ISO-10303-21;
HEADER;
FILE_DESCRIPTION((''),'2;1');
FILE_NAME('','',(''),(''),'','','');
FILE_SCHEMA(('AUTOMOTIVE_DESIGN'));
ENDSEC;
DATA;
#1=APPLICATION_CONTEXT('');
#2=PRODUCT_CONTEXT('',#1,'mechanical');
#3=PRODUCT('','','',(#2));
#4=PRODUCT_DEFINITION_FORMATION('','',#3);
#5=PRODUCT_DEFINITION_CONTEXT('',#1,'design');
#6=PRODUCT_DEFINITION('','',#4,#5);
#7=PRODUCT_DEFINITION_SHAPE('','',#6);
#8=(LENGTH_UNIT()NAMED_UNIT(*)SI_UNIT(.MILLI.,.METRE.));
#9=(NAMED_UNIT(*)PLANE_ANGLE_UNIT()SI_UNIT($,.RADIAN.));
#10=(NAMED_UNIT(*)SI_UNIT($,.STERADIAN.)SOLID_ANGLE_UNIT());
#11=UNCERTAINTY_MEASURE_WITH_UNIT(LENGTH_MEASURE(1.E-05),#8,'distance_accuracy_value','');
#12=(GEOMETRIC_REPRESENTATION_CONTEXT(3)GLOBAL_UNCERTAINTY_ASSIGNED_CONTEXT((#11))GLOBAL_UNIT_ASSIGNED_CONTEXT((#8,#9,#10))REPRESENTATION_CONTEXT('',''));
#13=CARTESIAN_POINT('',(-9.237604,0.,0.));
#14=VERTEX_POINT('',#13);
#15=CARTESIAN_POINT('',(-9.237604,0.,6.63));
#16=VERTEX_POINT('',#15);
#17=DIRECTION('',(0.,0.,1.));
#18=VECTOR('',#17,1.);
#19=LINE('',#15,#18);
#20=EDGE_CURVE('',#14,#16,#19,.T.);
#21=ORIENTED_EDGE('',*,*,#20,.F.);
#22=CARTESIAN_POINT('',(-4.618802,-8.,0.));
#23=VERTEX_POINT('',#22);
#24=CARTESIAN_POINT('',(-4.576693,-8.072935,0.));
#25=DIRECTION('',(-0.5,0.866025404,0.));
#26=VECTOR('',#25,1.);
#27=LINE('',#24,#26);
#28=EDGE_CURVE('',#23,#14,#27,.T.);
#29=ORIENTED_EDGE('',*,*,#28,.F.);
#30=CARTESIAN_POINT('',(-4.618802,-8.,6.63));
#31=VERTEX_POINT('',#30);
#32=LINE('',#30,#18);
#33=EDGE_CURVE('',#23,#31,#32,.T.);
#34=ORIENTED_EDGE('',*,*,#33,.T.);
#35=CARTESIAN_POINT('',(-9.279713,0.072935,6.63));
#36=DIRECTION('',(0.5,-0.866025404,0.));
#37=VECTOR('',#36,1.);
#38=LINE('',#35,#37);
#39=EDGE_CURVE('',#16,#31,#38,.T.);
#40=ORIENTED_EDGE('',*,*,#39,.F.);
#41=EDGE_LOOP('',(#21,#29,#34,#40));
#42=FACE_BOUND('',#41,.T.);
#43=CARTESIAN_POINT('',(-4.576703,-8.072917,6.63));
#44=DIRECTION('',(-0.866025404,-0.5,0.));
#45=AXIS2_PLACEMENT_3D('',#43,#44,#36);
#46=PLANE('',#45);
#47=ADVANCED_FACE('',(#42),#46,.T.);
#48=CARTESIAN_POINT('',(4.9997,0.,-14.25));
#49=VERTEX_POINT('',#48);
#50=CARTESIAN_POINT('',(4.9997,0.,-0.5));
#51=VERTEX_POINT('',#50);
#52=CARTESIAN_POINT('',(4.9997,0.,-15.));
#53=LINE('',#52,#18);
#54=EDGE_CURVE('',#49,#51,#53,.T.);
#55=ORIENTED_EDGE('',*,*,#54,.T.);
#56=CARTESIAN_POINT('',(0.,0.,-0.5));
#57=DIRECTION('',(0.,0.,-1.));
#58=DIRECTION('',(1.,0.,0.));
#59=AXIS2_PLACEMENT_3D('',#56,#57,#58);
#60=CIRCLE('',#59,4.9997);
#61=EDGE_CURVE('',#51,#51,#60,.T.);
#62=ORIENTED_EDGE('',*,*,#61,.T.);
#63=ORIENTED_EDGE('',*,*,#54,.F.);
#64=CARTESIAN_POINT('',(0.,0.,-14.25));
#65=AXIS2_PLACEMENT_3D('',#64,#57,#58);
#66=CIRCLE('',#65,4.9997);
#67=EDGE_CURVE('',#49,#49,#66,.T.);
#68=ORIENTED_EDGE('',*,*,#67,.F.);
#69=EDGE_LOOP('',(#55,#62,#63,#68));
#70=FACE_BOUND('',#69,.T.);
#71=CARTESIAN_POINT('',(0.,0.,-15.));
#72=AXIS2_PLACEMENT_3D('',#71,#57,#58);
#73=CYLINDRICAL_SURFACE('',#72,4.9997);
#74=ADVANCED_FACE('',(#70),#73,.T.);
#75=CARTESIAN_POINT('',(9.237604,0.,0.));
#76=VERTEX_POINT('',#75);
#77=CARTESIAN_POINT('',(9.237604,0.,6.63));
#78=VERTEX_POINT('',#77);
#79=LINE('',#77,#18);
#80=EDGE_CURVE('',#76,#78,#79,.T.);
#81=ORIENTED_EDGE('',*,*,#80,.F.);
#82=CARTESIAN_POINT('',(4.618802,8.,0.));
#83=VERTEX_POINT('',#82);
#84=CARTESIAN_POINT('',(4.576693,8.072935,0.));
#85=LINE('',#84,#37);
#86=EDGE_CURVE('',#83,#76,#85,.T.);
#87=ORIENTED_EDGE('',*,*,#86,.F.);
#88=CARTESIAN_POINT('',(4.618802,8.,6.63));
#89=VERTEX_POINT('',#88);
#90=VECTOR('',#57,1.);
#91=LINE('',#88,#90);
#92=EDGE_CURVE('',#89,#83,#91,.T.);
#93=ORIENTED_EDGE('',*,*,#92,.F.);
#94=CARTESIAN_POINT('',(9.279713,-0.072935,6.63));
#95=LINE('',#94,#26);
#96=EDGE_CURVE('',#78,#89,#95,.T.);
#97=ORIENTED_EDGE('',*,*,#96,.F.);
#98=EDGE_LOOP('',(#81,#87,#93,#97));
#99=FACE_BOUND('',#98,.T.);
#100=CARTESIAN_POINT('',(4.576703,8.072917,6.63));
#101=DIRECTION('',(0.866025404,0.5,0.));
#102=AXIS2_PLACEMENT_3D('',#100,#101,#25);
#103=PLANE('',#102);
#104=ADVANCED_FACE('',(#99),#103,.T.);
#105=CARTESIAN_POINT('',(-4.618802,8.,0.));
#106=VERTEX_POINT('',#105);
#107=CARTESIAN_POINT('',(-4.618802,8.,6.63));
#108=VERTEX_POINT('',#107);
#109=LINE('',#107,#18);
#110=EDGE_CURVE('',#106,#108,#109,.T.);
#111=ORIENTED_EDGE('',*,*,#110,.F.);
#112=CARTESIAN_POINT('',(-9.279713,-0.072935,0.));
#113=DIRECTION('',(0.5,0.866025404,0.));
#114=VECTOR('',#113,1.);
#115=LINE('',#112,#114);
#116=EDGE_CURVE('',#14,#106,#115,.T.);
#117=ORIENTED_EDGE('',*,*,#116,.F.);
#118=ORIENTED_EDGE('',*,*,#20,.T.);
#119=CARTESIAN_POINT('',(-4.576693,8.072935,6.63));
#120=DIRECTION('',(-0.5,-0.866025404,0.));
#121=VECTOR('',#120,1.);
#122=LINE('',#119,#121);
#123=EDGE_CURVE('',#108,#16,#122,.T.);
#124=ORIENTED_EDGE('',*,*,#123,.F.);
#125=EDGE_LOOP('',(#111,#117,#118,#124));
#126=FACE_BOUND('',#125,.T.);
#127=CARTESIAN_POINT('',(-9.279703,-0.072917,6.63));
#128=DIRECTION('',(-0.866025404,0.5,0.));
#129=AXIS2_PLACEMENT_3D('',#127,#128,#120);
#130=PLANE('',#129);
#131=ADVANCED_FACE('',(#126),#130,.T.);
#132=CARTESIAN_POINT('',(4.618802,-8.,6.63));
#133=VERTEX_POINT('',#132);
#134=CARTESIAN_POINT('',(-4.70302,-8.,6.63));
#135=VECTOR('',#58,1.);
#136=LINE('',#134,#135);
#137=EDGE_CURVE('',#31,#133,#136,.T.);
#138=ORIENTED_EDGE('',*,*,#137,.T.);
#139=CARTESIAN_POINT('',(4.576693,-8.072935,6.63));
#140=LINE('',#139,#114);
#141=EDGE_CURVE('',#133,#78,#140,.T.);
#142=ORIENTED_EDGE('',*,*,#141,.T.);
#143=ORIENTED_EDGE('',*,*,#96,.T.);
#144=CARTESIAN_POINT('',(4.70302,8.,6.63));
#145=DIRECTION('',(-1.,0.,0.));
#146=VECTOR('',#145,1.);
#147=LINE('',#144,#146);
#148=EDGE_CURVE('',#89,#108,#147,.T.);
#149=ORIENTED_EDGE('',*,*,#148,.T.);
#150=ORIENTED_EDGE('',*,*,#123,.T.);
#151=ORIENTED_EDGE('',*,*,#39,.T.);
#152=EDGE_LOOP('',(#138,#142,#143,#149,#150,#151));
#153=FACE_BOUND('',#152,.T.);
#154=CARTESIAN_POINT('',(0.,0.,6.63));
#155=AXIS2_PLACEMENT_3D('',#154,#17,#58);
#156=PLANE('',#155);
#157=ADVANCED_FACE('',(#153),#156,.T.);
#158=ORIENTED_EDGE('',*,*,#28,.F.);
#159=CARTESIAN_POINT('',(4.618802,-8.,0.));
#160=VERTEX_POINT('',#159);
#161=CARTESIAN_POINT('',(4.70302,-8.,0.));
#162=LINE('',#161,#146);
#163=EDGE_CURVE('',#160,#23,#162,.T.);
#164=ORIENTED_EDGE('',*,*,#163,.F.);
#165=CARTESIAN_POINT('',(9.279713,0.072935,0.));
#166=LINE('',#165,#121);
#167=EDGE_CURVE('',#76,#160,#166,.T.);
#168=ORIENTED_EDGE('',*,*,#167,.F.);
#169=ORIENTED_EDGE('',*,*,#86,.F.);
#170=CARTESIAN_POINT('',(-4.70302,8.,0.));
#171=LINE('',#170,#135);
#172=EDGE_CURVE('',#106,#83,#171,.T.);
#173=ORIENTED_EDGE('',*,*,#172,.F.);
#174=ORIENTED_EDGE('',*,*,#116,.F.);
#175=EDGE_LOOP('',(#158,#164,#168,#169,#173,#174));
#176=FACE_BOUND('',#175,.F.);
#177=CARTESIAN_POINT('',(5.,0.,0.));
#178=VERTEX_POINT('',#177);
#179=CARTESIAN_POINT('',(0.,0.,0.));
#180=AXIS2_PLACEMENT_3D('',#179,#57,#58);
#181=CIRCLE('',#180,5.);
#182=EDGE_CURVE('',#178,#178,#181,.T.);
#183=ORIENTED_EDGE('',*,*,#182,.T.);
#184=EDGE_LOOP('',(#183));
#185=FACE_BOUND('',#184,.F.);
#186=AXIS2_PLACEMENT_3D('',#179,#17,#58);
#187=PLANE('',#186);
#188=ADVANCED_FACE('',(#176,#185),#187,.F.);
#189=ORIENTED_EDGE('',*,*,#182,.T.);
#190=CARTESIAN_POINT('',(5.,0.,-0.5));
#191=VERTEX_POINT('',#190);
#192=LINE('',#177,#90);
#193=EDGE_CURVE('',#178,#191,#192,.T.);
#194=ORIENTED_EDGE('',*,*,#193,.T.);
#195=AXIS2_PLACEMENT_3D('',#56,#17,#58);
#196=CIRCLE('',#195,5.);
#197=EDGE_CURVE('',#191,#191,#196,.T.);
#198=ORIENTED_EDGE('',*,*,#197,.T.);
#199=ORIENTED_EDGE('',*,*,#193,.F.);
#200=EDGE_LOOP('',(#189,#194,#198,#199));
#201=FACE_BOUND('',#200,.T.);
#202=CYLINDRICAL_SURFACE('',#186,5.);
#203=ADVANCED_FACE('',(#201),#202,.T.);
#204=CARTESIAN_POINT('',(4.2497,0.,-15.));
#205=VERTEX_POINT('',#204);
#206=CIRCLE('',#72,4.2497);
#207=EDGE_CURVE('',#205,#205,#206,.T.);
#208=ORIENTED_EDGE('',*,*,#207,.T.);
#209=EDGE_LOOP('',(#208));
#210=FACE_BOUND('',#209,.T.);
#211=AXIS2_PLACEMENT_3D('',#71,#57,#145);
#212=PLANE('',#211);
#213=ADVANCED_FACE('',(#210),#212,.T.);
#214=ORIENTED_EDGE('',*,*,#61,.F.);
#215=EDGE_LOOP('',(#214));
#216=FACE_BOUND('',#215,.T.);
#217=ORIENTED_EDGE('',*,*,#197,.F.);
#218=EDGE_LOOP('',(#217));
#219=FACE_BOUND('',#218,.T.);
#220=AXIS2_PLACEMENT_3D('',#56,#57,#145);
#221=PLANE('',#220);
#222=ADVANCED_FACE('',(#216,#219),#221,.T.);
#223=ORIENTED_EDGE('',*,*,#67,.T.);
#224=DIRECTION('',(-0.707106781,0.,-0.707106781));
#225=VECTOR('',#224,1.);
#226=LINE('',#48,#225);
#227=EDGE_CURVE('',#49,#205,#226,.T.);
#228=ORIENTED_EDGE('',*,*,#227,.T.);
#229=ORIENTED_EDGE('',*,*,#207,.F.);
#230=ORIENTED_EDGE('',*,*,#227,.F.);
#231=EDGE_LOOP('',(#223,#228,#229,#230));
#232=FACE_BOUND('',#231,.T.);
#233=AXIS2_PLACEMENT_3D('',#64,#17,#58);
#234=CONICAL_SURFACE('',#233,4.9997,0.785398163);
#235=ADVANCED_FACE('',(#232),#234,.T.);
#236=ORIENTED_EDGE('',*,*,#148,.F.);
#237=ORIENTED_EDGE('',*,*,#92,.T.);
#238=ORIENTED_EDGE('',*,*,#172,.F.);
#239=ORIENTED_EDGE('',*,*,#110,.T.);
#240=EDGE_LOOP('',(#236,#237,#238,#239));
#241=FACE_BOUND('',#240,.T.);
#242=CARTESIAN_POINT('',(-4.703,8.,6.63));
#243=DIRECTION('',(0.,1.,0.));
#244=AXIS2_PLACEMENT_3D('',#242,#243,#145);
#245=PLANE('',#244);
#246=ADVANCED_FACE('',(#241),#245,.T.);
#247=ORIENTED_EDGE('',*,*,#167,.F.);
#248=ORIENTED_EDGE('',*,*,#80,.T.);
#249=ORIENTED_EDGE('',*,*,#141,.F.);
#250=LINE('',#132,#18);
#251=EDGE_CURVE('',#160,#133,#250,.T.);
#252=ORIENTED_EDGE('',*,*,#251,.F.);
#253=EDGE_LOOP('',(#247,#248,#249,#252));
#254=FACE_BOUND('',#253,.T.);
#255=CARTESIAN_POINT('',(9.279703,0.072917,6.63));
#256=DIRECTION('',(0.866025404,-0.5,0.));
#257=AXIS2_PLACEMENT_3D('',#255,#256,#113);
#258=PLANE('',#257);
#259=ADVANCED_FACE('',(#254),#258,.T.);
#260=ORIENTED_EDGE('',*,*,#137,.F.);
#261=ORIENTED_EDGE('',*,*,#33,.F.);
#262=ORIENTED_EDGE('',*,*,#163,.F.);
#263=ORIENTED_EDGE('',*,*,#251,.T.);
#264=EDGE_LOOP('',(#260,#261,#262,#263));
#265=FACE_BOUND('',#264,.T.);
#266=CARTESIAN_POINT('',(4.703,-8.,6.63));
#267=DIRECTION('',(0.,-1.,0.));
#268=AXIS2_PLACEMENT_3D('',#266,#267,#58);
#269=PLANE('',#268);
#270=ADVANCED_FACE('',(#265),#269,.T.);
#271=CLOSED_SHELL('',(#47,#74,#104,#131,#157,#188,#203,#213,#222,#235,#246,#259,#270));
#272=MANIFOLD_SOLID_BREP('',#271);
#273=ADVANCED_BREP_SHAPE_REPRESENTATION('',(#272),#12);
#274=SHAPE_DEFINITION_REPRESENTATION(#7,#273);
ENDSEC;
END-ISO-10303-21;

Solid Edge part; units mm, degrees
sketch "Sketch1" plane through (0, 0, 0) normal (0, 0, 1) x (1, 0, 0)
  circle A0 centre (0, 0) radius 9.28
  dimension "D1" = 18.56
extrude "Protrusion1" add sketch "Sketch1" along normal blind 6.63
sketch "Sketch2" plane through (0, 0, 0) normal (0, 0, -1) x (1, 0, 0)
  circle A0 centre (0, 0) radius 5
extrude "Protrusion2" add sketch "Sketch2" along normal blind 15
sketch "Sketch3" plane through (0, 0, -15) normal (0, 0, -1) x (1, 0, 0)
  circle A0 centre (0, 0) radius 4.9997
extrude "Cutout1" cut sketch "Sketch3" against normal blind 14.5 flip side to cut
chamfer "Chamfer_1" distance 0.75 angle 45 1 edges at (-4.9997, 0, -15)
sketch "Sketch4" plane through (0, 0, 6.63) normal (0, 0, 1) x (1, 0, 0)
  line L0 (-4.703, 8) -> (4.703, 8)
  dimension "D1" = 16
extrude "Cutout2" cut sketch "Sketch4" against normal up to next material side at (0, 8.05, 6.63)
pattern_circular "Pattern1" count 6 over 360 about axis through (0, 0, 6.63) along (0, 0, 1) of "Cutout2"
properties part number "24104373"
